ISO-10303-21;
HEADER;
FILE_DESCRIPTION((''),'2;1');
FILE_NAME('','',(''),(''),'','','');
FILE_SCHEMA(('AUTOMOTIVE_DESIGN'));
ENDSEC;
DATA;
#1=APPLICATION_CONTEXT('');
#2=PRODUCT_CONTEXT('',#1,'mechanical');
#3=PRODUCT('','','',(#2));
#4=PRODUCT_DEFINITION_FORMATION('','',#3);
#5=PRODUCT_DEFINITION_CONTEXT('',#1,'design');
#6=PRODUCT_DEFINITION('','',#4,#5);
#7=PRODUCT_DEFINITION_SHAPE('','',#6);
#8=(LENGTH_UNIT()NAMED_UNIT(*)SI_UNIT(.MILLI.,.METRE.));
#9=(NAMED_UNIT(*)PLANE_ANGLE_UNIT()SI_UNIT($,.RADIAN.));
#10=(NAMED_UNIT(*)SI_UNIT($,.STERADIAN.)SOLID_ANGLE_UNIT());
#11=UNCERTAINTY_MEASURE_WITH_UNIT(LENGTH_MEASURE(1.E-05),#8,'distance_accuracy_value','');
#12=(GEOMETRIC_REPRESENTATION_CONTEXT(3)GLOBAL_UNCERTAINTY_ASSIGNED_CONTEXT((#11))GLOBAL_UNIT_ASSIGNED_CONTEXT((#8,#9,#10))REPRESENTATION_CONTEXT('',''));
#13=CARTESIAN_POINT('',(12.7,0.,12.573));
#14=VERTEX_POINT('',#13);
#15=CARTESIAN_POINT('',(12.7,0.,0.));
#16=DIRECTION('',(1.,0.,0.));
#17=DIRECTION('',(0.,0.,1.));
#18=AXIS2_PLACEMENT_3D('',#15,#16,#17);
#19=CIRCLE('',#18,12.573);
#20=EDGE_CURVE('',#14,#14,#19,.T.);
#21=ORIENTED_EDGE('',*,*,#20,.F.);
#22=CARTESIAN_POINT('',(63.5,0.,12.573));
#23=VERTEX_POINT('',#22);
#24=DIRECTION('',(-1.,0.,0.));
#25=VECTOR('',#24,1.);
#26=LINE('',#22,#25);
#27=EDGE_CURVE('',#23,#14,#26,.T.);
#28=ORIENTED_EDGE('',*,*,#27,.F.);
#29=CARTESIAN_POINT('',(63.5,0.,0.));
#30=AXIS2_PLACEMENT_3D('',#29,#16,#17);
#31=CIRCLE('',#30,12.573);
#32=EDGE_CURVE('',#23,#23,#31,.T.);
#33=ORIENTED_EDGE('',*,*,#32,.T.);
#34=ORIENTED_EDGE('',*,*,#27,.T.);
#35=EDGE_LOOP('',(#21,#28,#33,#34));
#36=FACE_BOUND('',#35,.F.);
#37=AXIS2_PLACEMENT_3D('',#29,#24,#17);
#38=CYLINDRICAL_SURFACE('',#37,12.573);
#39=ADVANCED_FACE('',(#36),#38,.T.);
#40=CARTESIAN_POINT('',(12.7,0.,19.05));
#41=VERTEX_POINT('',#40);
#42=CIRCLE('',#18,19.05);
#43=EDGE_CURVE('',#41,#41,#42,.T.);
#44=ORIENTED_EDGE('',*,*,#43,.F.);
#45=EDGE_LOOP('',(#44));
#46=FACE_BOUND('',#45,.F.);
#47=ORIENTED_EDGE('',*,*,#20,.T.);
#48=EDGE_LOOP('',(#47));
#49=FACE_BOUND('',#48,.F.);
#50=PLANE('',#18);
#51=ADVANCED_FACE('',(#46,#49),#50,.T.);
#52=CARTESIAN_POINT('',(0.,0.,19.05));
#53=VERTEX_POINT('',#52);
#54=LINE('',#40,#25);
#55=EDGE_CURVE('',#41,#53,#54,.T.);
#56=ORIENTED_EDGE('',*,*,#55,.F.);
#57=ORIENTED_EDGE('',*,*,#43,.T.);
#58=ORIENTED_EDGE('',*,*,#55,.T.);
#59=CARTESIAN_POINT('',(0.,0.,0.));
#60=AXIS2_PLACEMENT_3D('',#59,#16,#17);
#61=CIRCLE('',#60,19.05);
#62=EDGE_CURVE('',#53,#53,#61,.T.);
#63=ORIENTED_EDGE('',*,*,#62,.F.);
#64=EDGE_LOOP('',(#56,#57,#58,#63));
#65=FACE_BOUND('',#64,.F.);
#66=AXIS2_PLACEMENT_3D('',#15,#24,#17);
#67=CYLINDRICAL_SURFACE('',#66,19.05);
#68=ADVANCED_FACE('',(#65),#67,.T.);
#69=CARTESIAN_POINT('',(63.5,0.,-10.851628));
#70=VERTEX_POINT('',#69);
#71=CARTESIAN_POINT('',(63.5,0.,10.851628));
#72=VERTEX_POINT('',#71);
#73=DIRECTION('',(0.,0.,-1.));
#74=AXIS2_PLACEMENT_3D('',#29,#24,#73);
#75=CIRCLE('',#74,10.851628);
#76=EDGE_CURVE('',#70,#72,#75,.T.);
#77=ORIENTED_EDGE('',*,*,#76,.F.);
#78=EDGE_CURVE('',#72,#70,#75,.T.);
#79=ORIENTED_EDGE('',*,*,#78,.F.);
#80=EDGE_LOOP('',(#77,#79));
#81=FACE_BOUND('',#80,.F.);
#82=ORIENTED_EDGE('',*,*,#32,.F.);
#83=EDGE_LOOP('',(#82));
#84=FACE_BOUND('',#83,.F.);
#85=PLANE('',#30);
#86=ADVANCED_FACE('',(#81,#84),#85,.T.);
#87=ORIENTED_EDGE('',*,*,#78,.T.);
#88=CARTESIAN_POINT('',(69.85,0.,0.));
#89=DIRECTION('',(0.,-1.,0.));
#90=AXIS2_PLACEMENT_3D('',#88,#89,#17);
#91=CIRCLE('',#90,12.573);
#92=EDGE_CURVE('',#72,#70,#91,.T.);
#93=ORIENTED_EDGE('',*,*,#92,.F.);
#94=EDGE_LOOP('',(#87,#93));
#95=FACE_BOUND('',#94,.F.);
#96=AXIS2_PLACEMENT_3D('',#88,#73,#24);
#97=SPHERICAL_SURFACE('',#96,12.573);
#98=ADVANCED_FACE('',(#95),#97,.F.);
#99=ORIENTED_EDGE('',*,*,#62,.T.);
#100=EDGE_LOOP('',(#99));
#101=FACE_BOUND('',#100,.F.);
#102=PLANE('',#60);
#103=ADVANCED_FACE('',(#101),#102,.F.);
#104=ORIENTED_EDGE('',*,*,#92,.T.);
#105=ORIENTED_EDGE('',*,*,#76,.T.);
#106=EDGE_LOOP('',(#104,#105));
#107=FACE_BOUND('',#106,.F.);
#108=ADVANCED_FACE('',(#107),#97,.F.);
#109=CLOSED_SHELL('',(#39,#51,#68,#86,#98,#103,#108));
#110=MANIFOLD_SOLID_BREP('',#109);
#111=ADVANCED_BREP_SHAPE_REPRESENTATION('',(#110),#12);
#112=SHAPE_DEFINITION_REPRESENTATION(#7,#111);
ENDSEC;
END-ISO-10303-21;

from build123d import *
from build123d import SkipClean  # not in build123d's __all__


with BuildPart() as f1:
    # F0 (on Front) → F1 (revolve)
    with BuildSketch(Plane.XZ):
        Polygon((63.5, 12.573), (12.7, 12.573), (12.7, 19.05), (0, 19.05), (0, 0), (63.5, 0), align=None)
    revolve(axis=Axis((25.1227524132, 0, 0), (1, 0, 0)))

    # F2 (on Front) → F3 (revolve, cut)
    with BuildSketch(Plane.XZ):
        with BuildLine():
            Line((69.85, -12.573), (69.85, 12.573))
            ThreePointArc((69.85, 12.573), (57.277, 0), (69.85, -12.573))
        make_face()
    with SkipClean():  # cleaning this boolean's faces spoils the solid; the shape is the same uncleaned
        revolve(axis=Axis((69.85, 0, 6.9150045632), (0, 0, -1)), mode=Mode.SUBTRACT)


solid = f1.part
